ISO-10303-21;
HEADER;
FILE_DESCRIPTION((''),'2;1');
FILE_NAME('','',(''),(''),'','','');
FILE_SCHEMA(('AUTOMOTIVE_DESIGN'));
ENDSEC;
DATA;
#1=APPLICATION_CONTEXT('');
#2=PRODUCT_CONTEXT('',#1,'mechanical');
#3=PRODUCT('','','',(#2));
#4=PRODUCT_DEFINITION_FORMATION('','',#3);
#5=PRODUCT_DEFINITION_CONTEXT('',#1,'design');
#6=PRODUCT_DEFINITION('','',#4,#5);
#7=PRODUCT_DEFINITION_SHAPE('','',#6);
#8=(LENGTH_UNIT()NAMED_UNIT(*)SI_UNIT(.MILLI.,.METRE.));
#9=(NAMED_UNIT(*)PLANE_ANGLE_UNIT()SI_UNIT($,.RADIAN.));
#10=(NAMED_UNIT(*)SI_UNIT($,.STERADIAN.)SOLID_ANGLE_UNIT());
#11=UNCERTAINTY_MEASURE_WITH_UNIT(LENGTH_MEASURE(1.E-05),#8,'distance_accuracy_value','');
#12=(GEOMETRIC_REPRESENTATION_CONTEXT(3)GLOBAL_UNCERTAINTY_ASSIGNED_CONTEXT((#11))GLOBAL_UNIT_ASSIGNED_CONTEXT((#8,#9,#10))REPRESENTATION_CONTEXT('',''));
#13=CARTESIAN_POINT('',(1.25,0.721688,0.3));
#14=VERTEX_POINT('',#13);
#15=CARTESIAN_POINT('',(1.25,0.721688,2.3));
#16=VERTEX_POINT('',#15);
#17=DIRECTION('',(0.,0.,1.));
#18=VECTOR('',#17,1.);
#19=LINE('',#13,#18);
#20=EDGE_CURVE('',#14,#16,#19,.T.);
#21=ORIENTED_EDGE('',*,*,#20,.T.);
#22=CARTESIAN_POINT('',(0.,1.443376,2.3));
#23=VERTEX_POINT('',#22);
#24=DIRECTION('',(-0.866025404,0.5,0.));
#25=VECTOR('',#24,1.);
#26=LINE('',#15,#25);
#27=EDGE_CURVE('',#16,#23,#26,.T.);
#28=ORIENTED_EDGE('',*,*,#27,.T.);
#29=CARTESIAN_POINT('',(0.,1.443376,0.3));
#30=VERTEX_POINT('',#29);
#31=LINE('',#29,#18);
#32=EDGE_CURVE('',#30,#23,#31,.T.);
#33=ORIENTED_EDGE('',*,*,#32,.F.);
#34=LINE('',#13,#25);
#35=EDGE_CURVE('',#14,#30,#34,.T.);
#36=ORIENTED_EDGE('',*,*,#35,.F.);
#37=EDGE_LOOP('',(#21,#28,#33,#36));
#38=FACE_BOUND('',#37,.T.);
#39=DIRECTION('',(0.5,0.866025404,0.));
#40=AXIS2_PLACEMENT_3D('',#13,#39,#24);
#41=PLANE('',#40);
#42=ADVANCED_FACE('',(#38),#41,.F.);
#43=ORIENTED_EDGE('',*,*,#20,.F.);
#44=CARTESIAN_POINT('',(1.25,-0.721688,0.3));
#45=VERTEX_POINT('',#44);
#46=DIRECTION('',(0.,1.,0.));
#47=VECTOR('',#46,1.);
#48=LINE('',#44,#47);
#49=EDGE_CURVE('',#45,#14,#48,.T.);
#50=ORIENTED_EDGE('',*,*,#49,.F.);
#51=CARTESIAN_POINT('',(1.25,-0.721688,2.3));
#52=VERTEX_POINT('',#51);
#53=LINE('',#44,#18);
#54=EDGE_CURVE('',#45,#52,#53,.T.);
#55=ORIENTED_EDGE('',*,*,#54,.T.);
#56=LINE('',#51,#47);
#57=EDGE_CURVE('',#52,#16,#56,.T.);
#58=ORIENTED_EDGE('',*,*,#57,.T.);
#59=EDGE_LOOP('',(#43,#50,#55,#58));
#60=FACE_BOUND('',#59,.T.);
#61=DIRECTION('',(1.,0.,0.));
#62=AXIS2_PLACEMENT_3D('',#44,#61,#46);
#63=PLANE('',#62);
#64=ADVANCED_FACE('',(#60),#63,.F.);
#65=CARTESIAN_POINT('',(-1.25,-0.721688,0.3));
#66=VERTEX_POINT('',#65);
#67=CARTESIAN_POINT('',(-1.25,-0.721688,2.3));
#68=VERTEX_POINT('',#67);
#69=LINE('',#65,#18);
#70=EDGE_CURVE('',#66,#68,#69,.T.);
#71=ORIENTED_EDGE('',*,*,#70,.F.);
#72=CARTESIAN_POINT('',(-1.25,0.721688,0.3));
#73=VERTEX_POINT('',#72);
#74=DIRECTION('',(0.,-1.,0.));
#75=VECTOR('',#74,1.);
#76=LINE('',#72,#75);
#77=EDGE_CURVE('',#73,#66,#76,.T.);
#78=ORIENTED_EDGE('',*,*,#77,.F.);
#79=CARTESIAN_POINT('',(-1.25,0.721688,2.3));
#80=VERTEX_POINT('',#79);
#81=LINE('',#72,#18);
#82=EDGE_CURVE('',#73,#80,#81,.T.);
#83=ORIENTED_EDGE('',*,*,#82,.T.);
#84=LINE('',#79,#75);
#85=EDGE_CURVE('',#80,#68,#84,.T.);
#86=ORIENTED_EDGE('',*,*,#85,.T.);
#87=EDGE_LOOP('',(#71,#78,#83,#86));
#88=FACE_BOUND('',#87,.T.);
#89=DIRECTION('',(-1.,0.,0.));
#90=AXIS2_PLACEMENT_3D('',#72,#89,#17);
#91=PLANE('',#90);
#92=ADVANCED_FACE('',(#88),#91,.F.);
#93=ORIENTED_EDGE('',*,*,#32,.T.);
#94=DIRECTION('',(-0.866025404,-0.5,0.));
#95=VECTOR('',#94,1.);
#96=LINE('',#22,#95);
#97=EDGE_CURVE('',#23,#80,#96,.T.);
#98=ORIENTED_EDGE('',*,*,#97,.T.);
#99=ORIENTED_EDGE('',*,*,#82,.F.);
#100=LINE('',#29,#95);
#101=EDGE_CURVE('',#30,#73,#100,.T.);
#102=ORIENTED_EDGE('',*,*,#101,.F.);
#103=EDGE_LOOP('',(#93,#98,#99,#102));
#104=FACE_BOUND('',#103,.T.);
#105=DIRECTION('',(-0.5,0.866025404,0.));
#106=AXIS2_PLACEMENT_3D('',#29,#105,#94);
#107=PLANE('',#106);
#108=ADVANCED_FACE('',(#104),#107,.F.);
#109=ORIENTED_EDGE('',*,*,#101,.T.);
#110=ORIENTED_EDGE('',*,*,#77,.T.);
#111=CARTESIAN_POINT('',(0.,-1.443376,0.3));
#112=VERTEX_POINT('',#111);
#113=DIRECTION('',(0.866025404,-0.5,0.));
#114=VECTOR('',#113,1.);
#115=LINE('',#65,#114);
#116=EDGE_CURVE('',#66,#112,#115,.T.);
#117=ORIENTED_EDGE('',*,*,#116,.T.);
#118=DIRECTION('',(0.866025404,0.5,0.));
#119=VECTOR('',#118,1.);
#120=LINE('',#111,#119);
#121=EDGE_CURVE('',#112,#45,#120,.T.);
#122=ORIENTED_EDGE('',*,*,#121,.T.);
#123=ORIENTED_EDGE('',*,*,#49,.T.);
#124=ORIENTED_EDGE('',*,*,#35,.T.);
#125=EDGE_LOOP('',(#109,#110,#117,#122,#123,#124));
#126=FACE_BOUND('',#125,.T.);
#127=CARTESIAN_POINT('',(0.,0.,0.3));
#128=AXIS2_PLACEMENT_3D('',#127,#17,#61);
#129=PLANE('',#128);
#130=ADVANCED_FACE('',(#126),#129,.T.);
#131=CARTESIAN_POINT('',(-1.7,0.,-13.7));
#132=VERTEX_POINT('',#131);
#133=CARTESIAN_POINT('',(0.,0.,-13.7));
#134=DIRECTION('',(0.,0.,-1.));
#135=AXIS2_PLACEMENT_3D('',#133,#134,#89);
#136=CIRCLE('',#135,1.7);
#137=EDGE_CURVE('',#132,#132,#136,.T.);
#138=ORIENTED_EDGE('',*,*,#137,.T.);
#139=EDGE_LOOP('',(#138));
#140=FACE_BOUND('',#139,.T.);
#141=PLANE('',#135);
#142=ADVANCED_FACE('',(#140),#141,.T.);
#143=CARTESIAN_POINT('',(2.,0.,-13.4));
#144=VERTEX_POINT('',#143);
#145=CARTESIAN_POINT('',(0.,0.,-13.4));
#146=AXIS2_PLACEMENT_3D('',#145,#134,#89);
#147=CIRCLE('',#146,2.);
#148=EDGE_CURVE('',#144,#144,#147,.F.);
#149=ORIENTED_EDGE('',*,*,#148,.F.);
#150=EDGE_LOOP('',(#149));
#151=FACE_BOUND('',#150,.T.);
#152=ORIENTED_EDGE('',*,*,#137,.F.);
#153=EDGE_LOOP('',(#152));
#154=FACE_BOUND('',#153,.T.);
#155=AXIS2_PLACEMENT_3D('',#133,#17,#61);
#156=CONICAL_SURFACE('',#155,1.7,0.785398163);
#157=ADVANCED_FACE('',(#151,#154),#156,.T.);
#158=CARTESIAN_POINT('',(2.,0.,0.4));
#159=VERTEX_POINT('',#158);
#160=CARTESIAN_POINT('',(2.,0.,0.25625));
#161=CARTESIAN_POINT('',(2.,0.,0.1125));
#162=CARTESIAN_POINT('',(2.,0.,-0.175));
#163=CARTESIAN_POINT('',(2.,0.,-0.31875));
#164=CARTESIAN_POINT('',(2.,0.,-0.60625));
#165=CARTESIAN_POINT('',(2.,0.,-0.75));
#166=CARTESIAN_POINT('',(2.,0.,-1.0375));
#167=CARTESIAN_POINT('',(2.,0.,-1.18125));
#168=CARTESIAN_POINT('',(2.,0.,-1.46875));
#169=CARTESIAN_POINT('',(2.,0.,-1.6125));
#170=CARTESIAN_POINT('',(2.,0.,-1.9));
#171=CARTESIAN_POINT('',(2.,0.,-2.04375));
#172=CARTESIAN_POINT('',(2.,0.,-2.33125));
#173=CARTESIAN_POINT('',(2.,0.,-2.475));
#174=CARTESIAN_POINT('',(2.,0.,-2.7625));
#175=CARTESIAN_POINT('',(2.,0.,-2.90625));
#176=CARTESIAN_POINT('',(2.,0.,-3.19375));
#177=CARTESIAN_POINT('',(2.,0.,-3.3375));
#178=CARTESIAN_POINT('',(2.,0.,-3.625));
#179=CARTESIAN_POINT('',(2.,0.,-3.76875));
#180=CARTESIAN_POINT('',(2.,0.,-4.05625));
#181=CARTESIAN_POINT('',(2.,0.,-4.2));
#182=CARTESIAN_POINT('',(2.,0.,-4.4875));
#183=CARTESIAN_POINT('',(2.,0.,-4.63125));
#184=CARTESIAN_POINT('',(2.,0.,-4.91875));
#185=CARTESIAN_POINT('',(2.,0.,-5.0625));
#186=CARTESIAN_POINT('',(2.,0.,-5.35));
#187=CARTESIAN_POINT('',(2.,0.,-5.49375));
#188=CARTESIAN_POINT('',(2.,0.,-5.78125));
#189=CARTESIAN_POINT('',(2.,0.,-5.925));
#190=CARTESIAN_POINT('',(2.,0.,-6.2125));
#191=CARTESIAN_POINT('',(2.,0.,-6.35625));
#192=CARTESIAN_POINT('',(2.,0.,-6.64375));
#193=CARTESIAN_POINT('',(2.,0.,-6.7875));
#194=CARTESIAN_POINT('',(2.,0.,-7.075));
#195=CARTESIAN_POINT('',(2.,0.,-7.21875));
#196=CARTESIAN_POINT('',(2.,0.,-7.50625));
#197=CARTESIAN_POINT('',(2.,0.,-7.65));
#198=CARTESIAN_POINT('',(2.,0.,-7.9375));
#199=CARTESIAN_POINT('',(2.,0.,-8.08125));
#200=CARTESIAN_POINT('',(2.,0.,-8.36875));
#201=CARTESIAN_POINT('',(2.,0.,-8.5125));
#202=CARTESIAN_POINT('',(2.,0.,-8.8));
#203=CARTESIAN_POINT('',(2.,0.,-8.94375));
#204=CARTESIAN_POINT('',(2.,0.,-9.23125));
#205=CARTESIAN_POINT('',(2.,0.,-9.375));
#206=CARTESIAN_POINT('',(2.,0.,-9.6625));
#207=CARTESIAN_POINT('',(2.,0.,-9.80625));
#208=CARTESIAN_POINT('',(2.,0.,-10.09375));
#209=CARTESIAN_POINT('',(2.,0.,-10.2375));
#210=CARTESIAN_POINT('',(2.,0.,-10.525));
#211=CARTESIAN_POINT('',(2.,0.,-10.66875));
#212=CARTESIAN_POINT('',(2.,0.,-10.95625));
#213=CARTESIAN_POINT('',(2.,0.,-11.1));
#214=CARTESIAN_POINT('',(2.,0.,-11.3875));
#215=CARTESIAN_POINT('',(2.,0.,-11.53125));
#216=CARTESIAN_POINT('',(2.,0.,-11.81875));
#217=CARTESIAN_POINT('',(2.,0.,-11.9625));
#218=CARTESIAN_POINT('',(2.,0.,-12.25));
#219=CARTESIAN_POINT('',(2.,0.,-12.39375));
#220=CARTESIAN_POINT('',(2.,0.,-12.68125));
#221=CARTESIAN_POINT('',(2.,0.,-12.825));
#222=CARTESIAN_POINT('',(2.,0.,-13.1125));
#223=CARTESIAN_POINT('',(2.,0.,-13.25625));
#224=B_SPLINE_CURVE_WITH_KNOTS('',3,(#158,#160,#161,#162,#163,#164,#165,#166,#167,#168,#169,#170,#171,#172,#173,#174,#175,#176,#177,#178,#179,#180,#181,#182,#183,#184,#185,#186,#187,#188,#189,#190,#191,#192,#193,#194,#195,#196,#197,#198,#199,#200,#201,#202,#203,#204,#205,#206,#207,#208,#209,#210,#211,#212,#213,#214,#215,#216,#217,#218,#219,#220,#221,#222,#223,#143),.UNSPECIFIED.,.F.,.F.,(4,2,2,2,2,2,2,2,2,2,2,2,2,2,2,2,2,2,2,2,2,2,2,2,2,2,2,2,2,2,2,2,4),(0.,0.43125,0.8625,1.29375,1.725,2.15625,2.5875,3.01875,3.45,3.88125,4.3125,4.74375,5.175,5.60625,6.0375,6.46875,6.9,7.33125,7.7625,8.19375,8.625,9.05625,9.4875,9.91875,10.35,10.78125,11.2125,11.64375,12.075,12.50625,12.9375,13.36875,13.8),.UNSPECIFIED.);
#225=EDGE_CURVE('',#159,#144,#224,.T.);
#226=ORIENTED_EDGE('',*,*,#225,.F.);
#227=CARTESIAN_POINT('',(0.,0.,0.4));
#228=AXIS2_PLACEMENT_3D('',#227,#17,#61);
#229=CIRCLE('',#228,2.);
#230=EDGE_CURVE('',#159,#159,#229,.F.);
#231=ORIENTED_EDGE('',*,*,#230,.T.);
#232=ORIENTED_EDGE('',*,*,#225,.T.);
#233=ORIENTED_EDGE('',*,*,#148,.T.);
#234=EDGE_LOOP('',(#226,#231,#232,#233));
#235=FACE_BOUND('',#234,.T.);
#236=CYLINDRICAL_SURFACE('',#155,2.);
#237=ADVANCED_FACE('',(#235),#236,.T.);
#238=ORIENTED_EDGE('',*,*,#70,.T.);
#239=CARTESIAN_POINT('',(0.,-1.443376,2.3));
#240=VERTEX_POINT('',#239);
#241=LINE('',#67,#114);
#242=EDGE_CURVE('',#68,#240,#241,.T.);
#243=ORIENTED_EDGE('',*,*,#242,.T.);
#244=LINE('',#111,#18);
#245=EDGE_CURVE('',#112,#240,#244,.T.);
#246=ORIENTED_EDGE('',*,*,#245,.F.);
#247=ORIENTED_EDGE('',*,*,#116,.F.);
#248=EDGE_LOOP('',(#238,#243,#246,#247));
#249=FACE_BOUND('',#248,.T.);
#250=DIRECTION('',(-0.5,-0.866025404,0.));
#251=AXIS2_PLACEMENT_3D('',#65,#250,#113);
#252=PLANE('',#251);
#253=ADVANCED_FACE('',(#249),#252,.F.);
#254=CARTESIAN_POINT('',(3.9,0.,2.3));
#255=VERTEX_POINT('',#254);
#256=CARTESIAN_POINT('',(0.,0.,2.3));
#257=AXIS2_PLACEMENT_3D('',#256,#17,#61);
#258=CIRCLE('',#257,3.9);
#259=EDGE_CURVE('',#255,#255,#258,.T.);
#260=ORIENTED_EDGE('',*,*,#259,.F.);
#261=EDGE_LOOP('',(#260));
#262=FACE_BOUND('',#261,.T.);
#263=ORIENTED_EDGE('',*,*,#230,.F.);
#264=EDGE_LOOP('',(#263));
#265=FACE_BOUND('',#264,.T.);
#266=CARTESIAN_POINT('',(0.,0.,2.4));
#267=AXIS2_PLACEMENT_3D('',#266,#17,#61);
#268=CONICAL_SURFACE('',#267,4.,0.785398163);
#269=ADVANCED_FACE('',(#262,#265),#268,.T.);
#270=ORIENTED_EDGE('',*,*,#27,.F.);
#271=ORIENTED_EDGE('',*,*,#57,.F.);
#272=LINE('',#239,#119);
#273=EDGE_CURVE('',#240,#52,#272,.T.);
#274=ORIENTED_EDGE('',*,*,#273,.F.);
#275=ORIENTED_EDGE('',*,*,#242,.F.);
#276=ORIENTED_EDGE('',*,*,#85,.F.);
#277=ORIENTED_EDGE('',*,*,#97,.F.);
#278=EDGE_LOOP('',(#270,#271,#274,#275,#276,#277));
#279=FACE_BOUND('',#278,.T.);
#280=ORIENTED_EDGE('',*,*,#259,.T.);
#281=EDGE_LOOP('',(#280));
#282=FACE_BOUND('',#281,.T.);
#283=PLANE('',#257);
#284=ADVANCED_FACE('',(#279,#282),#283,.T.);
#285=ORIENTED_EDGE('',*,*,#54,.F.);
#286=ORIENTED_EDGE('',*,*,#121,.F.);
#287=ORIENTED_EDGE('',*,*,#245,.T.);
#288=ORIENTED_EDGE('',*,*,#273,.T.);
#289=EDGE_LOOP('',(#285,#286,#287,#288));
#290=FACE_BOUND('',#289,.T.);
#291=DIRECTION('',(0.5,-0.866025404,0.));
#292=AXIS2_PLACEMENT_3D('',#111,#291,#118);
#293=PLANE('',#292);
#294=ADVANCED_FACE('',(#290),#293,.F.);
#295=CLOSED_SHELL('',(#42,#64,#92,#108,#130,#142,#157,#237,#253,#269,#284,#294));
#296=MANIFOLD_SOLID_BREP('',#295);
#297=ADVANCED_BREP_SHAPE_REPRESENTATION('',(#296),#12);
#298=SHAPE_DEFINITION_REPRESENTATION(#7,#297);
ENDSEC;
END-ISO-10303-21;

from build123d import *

# Parameters (mm, degrees)
SKETCH1_R           = 4
BOSS_EXTRUDE1_DEPTH = 2.3
SKETCH2_R           = 2
BOSS_EXTRUDE2_DEPTH = 13.7
CHAMFER1_SIZE       = 0.3
CUT_EXTRUDE1_DEPTH  = 2
CHAMFER2_SIZE       = 2.4


with BuildPart() as part:
    # Sketch1 → Boss-Extrude1 (new body)
    with BuildSketch(Plane.XY):
        Circle(SKETCH1_R)
    extrude(amount=BOSS_EXTRUDE1_DEPTH)

    # Sketch2 → Boss-Extrude2 (add)
    with BuildSketch(Plane(origin=(0, 0, 0), x_dir=(-1, 0, 0), z_dir=(0, 0, -1))):
        with Locations(Location((0, 0, 0), (0, 0, 180))):
            Circle(SKETCH2_R)
    extrude(amount=BOSS_EXTRUDE2_DEPTH)

    # Chamfer1
    chamfer1_edges = [part.edges().sort_by_distance(p)[0] for p in [
        (-2, 0, -13.7),
    ]]
    chamfer(chamfer1_edges, length=CHAMFER1_SIZE)

    # Sketch3 → Cut-Extrude1 (cut)
    with BuildSketch(Plane.XY.offset(2.3)):
        Polygon((0, 1.443375673), (-1.25, 0.721687836), (-1.25, -0.721687836), (0, -1.443375673), (1.25, -0.721687836), (1.25, 0.721687836), align=None)
    extrude(amount=-CUT_EXTRUDE1_DEPTH, mode=Mode.SUBTRACT)

    # Chamfer2
    # the kernel refuses this chamfer: 2.4 mm, written as the material it takes off along each edge
    with BuildSketch(Plane(origin=(0, 0, 0), x_dir=(1, 0, 0), z_dir=(0, -1, 0))) as chamfer2_piece_1_section:
        Polygon((4 - CHAMFER2_SIZE, 0), (4, CHAMFER2_SIZE), (4, 0), align=None)
    chamfer2_piece_1 = revolve(axis=Axis((0, 0, 0), (0, 0, 1)), mode=Mode.PRIVATE)
    chamfer2_piece_1 = chamfer2_piece_1 - Plane(origin=(0, 0, 1.405884102), x_dir=(1, 0, 0), z_dir=(0, 0, 1)) * Cylinder(2, 16, mode=Mode.PRIVATE)
    add(chamfer2_piece_1, mode=Mode.SUBTRACT)


solid = part.part
